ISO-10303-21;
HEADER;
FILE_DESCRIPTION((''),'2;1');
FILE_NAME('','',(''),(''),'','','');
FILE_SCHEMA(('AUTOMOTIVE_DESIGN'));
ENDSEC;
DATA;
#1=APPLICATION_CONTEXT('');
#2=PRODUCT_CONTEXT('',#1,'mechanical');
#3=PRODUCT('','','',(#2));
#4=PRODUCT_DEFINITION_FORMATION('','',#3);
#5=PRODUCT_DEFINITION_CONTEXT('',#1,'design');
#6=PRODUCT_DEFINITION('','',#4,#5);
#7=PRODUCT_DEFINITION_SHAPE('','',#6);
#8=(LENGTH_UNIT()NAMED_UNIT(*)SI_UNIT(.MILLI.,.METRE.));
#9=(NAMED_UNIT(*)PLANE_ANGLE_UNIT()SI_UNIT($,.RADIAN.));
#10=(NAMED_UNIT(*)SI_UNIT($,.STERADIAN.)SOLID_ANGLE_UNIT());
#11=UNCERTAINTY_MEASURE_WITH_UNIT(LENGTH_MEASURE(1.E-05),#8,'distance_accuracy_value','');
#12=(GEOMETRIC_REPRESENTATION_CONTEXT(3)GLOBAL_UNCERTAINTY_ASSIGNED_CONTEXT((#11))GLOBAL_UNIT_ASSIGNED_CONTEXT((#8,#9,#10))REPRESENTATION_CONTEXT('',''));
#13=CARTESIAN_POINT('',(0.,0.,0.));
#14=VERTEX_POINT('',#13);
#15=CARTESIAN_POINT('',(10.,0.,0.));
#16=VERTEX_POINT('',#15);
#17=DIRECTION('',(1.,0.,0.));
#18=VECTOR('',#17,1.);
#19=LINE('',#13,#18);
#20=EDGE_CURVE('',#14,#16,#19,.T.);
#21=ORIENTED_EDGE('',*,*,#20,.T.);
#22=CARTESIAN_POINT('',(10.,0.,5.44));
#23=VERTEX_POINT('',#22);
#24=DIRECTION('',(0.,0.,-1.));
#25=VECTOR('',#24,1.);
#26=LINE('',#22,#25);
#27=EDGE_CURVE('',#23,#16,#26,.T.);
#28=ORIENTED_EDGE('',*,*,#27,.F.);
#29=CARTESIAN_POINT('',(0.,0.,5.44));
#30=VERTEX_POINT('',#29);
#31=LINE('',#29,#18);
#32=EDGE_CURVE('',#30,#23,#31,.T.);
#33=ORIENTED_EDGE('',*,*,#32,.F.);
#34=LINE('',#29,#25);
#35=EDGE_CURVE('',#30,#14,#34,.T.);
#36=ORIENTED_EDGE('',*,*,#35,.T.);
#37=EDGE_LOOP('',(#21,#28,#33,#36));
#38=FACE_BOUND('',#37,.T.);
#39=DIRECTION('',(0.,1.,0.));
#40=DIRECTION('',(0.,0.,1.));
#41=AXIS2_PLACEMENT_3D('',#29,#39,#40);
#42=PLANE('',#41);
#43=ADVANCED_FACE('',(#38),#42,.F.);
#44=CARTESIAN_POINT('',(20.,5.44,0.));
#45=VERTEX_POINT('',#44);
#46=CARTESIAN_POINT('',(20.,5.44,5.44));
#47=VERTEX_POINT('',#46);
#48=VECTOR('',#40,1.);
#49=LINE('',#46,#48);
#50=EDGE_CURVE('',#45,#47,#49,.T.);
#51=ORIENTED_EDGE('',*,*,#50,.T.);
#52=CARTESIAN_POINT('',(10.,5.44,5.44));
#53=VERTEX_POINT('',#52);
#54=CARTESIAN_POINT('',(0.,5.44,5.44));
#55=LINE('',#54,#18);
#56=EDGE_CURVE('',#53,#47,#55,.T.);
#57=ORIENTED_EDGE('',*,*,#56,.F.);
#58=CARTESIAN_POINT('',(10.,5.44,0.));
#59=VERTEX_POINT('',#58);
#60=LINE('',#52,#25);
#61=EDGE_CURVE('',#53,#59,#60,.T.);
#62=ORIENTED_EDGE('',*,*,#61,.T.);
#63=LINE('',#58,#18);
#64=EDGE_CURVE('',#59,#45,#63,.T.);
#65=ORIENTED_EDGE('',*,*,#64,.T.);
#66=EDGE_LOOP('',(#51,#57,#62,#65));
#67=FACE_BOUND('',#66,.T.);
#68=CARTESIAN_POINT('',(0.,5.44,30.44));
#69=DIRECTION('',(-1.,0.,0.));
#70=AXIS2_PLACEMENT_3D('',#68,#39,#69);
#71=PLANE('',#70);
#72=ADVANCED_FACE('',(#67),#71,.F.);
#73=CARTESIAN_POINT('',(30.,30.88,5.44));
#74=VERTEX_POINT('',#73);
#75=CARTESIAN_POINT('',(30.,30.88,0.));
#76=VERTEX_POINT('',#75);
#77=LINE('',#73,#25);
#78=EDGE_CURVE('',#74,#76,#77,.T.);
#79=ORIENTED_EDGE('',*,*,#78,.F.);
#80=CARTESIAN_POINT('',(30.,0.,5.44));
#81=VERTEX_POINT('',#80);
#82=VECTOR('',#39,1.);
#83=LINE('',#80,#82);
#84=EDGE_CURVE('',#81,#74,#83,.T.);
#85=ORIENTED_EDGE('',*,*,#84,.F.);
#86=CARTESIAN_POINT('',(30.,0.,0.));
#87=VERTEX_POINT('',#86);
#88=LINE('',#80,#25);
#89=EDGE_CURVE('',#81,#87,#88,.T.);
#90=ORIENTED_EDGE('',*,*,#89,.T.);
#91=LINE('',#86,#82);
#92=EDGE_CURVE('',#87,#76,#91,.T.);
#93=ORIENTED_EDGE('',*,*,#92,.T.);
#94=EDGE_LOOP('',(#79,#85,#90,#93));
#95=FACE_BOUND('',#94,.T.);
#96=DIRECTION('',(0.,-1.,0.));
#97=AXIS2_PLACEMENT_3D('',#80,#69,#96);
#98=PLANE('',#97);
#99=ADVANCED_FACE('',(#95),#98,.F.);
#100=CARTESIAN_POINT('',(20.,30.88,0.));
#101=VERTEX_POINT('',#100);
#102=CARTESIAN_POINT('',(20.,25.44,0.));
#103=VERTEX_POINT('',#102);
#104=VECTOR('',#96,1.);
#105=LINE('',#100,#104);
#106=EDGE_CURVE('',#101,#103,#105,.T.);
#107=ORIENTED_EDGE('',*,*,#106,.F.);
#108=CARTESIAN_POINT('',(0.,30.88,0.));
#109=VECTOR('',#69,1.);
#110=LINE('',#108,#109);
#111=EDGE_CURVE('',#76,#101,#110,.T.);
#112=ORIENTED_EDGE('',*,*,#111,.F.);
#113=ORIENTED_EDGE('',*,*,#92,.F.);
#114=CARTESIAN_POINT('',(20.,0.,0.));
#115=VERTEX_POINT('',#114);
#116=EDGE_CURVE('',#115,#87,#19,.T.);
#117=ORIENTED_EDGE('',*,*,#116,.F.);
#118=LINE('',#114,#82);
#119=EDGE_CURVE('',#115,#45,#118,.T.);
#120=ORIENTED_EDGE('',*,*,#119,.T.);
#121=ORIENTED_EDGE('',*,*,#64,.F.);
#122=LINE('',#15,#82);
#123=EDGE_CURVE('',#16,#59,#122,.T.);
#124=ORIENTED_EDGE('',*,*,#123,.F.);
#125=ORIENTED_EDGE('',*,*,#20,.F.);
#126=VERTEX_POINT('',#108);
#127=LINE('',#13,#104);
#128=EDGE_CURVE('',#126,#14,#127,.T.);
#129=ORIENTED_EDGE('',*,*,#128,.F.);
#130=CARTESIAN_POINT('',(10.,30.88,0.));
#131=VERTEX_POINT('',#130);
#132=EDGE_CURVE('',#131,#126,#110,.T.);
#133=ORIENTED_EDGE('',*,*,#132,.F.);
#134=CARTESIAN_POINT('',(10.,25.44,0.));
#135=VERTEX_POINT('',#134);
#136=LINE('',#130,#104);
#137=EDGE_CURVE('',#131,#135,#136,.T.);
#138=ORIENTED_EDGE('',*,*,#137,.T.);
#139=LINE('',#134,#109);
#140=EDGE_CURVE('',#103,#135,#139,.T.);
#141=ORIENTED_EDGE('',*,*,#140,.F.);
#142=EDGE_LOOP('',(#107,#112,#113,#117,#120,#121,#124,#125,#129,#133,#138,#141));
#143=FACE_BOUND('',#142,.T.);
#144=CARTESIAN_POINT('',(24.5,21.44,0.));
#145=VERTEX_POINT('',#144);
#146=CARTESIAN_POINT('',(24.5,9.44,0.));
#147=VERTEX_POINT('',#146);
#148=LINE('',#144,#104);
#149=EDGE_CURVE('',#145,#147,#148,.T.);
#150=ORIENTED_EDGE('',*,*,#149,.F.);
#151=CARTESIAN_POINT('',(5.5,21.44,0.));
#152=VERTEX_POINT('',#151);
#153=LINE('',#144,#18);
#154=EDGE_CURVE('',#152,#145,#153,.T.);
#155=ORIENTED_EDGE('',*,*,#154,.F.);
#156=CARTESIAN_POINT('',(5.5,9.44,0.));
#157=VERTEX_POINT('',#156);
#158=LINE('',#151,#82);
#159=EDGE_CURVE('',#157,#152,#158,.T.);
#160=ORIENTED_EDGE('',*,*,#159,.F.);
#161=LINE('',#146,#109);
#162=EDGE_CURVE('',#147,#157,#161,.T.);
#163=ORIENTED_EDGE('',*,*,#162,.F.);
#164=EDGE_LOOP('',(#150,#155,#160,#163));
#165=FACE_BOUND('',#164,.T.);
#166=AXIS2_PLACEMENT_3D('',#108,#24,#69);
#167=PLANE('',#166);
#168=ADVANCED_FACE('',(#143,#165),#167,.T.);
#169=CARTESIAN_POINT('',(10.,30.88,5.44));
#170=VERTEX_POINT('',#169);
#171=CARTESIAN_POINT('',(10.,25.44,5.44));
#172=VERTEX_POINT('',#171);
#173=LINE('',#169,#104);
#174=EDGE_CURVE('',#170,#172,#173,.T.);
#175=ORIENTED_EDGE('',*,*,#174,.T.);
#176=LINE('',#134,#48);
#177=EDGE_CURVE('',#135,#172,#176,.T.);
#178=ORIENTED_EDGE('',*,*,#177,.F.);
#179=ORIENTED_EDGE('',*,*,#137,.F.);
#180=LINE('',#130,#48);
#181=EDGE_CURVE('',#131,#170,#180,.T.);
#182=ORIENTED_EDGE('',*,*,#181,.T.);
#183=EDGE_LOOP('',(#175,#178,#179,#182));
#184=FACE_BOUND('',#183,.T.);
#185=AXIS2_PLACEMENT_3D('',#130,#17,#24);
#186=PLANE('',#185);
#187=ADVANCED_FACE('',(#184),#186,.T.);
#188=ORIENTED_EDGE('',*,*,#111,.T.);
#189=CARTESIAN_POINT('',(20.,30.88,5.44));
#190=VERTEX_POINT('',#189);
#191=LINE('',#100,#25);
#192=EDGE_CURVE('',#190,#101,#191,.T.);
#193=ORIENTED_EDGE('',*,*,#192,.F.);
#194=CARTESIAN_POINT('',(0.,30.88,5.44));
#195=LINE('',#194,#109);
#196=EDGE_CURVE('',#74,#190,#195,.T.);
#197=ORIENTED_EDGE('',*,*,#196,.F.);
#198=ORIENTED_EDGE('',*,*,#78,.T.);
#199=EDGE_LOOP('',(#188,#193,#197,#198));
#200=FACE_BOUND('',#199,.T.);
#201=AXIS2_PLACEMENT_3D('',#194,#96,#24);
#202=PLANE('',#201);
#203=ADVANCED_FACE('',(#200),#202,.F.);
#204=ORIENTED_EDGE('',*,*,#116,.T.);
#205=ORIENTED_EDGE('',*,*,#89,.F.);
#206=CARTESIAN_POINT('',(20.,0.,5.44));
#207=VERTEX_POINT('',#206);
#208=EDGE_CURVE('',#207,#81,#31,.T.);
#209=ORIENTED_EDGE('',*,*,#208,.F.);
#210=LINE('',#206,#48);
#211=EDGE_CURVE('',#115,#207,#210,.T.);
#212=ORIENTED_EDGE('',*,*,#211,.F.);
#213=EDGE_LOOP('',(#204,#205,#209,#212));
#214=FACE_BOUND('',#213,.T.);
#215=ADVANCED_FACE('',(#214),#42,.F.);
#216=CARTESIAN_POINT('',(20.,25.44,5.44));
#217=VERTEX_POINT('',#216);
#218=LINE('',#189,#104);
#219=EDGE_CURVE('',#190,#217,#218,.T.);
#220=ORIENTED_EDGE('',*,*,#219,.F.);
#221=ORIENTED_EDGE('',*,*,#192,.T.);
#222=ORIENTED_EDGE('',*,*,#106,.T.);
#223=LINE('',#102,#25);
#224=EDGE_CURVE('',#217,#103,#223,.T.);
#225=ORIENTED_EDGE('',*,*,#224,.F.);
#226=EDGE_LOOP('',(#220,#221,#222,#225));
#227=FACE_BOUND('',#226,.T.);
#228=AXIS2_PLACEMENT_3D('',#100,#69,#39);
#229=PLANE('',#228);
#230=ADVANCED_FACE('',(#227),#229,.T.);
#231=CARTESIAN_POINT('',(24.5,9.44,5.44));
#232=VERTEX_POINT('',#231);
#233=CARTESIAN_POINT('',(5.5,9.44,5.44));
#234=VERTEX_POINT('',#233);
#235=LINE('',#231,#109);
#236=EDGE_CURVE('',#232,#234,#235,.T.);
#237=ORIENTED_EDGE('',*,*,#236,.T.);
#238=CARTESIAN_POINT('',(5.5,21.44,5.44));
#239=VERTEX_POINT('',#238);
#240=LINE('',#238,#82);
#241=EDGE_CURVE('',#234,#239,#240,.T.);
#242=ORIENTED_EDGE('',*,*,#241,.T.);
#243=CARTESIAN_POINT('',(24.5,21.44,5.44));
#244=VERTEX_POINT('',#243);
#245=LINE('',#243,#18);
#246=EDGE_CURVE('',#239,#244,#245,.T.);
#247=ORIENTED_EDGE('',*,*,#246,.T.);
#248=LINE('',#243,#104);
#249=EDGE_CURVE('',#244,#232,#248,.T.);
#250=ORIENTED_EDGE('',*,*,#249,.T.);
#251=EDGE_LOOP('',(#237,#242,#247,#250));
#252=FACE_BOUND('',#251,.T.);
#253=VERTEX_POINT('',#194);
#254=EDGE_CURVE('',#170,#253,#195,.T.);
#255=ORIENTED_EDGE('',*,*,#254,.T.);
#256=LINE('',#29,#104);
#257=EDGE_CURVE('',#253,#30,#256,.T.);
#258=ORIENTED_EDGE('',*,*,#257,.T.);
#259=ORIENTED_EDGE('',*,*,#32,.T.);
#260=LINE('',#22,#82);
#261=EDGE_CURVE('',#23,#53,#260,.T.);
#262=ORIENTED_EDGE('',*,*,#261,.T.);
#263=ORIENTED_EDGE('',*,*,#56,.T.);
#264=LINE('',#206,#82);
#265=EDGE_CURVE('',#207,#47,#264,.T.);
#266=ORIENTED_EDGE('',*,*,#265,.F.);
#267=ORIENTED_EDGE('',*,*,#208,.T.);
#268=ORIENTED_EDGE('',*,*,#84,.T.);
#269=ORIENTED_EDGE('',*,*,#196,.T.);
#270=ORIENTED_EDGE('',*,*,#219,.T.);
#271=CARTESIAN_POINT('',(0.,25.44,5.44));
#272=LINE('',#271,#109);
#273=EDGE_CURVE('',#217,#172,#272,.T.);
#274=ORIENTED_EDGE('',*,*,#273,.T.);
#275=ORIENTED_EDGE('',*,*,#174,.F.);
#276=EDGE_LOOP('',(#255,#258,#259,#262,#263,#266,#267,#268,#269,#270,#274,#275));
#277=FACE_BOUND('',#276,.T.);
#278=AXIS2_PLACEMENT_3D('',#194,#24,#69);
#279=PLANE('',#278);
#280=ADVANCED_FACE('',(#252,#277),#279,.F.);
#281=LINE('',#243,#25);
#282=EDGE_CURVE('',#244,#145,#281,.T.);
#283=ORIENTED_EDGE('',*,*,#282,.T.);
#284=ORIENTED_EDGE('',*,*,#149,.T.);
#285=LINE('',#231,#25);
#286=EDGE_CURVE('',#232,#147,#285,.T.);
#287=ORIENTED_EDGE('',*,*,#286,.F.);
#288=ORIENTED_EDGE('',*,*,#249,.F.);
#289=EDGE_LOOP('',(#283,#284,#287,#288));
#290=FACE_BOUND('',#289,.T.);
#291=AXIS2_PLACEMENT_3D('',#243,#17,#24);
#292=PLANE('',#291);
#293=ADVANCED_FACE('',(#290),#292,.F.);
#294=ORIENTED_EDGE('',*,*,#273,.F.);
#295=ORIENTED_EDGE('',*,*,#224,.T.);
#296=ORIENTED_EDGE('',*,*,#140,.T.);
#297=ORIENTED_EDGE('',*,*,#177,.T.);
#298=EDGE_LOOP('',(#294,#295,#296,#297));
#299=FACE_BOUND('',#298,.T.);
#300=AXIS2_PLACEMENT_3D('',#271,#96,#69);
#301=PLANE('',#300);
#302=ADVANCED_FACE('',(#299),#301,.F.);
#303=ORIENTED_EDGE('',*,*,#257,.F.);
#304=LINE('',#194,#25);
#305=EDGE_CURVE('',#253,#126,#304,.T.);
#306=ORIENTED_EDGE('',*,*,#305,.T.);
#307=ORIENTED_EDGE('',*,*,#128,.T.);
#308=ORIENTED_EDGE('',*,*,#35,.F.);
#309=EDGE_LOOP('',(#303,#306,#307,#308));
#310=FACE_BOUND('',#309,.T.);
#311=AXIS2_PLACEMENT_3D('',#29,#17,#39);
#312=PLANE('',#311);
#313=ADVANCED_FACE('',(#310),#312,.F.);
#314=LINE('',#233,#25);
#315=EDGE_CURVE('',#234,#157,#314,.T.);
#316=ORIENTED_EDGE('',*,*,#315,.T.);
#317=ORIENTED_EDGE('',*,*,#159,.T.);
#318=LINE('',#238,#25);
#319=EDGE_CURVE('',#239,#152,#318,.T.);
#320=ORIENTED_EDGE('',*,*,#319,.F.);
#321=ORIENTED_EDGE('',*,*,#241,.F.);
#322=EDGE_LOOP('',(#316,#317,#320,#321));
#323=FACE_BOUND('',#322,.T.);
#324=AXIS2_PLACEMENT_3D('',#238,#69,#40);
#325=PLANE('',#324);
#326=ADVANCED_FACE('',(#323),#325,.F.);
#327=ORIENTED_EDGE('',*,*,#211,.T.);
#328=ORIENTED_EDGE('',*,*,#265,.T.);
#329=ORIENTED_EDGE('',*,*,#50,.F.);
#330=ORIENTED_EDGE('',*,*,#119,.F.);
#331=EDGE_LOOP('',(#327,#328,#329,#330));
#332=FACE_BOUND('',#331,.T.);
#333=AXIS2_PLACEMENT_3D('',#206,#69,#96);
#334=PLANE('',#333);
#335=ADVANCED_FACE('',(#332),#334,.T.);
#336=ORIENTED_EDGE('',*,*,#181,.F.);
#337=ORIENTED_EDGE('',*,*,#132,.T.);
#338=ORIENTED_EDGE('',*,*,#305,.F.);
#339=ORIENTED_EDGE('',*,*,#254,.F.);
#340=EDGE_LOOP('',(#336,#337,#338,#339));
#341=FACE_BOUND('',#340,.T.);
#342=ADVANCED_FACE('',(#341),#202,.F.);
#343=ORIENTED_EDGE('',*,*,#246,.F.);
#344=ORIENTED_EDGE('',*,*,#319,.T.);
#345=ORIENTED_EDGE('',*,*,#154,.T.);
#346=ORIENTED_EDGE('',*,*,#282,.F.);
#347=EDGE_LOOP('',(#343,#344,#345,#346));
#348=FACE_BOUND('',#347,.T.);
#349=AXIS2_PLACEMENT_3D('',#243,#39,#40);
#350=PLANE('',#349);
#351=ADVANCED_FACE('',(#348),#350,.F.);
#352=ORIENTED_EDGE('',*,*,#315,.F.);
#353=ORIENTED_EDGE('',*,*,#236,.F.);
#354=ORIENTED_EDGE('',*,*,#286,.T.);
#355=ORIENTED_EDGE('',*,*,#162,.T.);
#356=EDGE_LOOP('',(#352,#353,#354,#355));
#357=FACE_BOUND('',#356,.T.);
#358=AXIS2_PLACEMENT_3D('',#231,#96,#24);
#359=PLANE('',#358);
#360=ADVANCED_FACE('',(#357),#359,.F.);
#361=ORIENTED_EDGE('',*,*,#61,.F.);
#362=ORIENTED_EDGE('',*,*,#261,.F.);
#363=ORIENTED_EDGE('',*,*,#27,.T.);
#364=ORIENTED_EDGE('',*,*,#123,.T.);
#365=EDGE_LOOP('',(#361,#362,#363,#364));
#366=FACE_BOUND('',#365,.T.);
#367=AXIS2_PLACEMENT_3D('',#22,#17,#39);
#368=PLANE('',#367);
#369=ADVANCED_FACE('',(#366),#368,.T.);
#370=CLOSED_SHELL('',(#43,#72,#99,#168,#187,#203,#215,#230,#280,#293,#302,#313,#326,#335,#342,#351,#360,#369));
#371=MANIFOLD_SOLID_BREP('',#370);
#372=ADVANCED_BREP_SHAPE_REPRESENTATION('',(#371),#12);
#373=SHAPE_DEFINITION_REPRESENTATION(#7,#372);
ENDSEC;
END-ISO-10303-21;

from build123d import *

# Parameters (mm, degrees)
SKETCH1_W           = 30
SKETCH1_H           = 30.88
BOSS_EXTRUDE1_DEPTH = 5.44
SKETCH2_W           = 19
SKETCH2_H           = 12
CUT_EXTRUDE1_DEPTH  = 44.395483636
CAVITY1_OUTLINE_W   = 10
CAVITY1_OUTLINE_H   = 5.44
CAVITY1_DEPTH       = 5.44
CAVITY1_START       = 25.44
CAVITY1_2_OUTLINE_W = 10
CAVITY1_2_OUTLINE_H = 5.44
CAVITY1_2_DEPTH     = 5.44


# Read off the part's stored shape, not the designer's step: Cavity1
with BuildPart() as part:
    # Sketch1 → Boss-Extrude1 (new body)
    with BuildSketch(Plane.XY):
        with Locations((15, 15.44)):
            Rectangle(SKETCH1_W, SKETCH1_H)
    extrude(amount=BOSS_EXTRUDE1_DEPTH)

    # Sketch2 → Cut-Extrude1 (cut, through all)
    with BuildSketch(Plane(origin=(0, 0, 0), x_dir=(-1, 0, 0), z_dir=(0, 0, -1))):
        with Locations((-15, 15.44)):
            Rectangle(SKETCH2_W, SKETCH2_H)
    extrude(amount=-CUT_EXTRUDE1_DEPTH, mode=Mode.SUBTRACT)

    # Cavity1 outline → Cavity1 (cut)
    with BuildSketch(Plane(origin=(0, 0, 0), x_dir=(1, 0, 0), z_dir=(0, 1, 0))):
        with Locations((15, -2.72)):
            Rectangle(CAVITY1_OUTLINE_W, CAVITY1_OUTLINE_H)
    extrude(amount=CAVITY1_DEPTH, mode=Mode.SUBTRACT)

    # Cavity1 2 outline → Cavity1 2 (cut)
    with BuildSketch(Plane(origin=(0, 0, 0), x_dir=(1, 0, 0), z_dir=(0, 1, 0)).offset(CAVITY1_START)):
        with Locations((15, -2.72)):
            Rectangle(CAVITY1_2_OUTLINE_W, CAVITY1_2_OUTLINE_H)
    extrude(amount=CAVITY1_2_DEPTH, mode=Mode.SUBTRACT)


solid = part.part
